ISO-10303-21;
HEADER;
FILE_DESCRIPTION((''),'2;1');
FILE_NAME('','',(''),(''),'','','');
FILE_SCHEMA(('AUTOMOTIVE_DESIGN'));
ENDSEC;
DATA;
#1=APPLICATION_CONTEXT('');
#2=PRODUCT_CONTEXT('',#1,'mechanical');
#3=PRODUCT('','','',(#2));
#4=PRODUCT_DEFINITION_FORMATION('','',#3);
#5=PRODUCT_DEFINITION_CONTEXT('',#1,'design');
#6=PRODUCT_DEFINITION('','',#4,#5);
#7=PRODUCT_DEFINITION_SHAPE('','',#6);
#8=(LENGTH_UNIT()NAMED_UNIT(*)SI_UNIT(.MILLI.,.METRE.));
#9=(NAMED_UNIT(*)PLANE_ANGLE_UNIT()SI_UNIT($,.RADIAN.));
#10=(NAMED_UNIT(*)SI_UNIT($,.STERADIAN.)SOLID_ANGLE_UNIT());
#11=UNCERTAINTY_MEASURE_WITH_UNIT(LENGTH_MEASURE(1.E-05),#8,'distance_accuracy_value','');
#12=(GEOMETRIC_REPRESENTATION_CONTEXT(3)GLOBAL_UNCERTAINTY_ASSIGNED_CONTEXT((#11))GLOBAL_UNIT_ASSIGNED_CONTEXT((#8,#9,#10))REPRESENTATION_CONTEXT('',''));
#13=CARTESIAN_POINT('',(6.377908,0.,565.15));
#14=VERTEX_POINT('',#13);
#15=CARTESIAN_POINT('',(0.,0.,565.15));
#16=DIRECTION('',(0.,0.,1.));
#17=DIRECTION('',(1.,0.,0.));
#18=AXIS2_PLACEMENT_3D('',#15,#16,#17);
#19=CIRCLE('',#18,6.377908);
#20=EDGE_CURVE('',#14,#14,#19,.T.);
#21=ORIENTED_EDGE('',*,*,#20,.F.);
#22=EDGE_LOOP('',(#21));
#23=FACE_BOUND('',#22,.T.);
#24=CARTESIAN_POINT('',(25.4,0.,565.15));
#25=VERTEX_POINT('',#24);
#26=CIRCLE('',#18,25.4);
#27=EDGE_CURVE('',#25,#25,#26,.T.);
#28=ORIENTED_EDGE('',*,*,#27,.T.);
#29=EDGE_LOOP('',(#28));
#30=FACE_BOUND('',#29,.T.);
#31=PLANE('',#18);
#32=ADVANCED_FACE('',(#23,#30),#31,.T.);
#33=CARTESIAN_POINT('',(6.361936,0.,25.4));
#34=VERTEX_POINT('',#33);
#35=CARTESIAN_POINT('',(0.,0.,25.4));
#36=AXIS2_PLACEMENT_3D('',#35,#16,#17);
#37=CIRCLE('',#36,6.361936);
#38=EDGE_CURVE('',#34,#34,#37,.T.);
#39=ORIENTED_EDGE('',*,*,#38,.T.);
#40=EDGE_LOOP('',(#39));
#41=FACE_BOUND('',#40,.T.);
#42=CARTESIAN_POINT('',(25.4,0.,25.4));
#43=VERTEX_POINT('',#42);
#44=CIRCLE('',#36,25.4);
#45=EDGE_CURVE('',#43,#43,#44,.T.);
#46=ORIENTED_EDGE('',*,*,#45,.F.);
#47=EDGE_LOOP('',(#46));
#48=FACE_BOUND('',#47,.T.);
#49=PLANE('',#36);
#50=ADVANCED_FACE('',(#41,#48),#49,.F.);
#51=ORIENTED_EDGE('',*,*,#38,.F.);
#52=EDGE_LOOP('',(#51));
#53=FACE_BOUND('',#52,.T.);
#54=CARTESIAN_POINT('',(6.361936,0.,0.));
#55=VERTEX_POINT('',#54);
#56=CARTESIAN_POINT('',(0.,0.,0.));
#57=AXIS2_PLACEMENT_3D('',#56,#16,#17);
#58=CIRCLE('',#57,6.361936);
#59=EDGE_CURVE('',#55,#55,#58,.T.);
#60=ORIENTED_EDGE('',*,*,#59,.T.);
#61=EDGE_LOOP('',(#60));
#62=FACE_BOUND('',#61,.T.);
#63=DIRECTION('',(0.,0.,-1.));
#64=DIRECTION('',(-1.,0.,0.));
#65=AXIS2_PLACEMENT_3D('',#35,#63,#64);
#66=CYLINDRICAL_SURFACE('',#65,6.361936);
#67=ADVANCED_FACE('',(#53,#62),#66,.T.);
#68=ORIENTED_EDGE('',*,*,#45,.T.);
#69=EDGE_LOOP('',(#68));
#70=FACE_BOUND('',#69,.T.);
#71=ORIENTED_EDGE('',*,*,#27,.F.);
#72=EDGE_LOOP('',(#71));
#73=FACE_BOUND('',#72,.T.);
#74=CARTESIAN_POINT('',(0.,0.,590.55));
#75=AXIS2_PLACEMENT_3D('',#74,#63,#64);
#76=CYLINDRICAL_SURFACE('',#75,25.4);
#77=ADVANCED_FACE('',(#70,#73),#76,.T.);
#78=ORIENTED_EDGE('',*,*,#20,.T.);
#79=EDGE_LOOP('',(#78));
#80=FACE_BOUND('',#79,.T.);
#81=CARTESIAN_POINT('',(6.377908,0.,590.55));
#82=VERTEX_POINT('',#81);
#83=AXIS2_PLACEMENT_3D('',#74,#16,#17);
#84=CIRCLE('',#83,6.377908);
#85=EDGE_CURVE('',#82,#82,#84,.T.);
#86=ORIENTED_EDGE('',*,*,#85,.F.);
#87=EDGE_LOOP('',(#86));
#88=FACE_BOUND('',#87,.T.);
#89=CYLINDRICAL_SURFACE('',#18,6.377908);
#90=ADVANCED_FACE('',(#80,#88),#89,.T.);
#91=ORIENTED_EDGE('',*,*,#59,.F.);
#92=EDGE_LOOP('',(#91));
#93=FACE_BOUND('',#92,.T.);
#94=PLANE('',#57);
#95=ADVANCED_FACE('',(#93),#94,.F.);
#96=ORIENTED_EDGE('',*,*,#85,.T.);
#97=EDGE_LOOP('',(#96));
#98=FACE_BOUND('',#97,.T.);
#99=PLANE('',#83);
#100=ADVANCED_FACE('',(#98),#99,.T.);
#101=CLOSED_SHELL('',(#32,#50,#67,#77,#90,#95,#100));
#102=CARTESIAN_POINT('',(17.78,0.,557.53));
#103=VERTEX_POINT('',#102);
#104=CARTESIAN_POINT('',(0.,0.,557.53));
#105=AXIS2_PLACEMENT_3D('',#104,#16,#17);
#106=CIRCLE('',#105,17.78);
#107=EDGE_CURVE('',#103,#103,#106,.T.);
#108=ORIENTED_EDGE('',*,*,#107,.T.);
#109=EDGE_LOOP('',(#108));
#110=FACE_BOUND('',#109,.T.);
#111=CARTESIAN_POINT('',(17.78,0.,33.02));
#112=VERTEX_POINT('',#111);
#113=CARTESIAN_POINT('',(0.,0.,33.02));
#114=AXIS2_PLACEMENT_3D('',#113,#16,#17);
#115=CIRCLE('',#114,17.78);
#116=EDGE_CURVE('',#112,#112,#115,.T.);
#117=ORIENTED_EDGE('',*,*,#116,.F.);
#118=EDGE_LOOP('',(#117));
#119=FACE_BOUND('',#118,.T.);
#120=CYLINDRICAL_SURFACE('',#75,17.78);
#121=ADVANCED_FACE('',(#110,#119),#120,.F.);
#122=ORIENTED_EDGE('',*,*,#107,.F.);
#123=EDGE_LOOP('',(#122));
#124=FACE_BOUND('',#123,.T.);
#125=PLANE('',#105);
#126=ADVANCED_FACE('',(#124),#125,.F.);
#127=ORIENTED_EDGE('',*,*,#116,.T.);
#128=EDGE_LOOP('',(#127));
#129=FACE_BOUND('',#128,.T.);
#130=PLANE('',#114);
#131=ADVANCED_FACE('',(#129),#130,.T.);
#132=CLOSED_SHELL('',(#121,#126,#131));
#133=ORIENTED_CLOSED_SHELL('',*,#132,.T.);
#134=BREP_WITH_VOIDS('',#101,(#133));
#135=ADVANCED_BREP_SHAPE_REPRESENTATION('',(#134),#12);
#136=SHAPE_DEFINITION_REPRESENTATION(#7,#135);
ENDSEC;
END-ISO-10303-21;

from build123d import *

# Parameters (mm, degrees)
SKETCH1_R           = 25.4
BOSS_EXTRUDE1_DEPTH = 590.55
SKETCH2_OUTSIDE_W   = 171.78
SKETCH2_OUTSIDE_H   = 171.78
SKETCH2_OUTSIDE_R   = 6.361935525
CUT_EXTRUDE1_DEPTH  = 25.4
SKETCH5_OUTSIDE_W   = 171.78
SKETCH5_OUTSIDE_H   = 171.78
SKETCH5_OUTSIDE_R   = 6.377907631
CUT_EXTRUDE4_DEPTH  = 25.4
SHELL3_START        = 33.02
SHELL3_OUTLINE_R    = 17.78
SHELL3_DEPTH        = 524.51


# Read off the part's stored shape, not the designer's step: Shell3
with BuildPart() as part:
    # Sketch1 → Boss-Extrude1 (new body)
    with BuildSketch(Plane.XY):
        Circle(SKETCH1_R)
    extrude(amount=BOSS_EXTRUDE1_DEPTH)

    # Sketch2 outside → Cut-Extrude1 (cut)
    with BuildSketch(Plane.XY):
        Rectangle(SKETCH2_OUTSIDE_W, SKETCH2_OUTSIDE_H)
        Circle(SKETCH2_OUTSIDE_R, mode=Mode.SUBTRACT)
    extrude(amount=CUT_EXTRUDE1_DEPTH, mode=Mode.SUBTRACT)

    # Sketch5 outside → Cut-Extrude4 (cut)
    with BuildSketch(Plane.XY.offset(590.55)):
        Rectangle(SKETCH5_OUTSIDE_W, SKETCH5_OUTSIDE_H)
        Circle(SKETCH5_OUTSIDE_R, mode=Mode.SUBTRACT)
    extrude(amount=-CUT_EXTRUDE4_DEPTH, mode=Mode.SUBTRACT)

    # Shell3 outline → Shell3 (cut)
    with BuildSketch(Plane.XY.offset(SHELL3_START)):
        Circle(SHELL3_OUTLINE_R)
    extrude(amount=SHELL3_DEPTH, mode=Mode.SUBTRACT)


solid = part.part
